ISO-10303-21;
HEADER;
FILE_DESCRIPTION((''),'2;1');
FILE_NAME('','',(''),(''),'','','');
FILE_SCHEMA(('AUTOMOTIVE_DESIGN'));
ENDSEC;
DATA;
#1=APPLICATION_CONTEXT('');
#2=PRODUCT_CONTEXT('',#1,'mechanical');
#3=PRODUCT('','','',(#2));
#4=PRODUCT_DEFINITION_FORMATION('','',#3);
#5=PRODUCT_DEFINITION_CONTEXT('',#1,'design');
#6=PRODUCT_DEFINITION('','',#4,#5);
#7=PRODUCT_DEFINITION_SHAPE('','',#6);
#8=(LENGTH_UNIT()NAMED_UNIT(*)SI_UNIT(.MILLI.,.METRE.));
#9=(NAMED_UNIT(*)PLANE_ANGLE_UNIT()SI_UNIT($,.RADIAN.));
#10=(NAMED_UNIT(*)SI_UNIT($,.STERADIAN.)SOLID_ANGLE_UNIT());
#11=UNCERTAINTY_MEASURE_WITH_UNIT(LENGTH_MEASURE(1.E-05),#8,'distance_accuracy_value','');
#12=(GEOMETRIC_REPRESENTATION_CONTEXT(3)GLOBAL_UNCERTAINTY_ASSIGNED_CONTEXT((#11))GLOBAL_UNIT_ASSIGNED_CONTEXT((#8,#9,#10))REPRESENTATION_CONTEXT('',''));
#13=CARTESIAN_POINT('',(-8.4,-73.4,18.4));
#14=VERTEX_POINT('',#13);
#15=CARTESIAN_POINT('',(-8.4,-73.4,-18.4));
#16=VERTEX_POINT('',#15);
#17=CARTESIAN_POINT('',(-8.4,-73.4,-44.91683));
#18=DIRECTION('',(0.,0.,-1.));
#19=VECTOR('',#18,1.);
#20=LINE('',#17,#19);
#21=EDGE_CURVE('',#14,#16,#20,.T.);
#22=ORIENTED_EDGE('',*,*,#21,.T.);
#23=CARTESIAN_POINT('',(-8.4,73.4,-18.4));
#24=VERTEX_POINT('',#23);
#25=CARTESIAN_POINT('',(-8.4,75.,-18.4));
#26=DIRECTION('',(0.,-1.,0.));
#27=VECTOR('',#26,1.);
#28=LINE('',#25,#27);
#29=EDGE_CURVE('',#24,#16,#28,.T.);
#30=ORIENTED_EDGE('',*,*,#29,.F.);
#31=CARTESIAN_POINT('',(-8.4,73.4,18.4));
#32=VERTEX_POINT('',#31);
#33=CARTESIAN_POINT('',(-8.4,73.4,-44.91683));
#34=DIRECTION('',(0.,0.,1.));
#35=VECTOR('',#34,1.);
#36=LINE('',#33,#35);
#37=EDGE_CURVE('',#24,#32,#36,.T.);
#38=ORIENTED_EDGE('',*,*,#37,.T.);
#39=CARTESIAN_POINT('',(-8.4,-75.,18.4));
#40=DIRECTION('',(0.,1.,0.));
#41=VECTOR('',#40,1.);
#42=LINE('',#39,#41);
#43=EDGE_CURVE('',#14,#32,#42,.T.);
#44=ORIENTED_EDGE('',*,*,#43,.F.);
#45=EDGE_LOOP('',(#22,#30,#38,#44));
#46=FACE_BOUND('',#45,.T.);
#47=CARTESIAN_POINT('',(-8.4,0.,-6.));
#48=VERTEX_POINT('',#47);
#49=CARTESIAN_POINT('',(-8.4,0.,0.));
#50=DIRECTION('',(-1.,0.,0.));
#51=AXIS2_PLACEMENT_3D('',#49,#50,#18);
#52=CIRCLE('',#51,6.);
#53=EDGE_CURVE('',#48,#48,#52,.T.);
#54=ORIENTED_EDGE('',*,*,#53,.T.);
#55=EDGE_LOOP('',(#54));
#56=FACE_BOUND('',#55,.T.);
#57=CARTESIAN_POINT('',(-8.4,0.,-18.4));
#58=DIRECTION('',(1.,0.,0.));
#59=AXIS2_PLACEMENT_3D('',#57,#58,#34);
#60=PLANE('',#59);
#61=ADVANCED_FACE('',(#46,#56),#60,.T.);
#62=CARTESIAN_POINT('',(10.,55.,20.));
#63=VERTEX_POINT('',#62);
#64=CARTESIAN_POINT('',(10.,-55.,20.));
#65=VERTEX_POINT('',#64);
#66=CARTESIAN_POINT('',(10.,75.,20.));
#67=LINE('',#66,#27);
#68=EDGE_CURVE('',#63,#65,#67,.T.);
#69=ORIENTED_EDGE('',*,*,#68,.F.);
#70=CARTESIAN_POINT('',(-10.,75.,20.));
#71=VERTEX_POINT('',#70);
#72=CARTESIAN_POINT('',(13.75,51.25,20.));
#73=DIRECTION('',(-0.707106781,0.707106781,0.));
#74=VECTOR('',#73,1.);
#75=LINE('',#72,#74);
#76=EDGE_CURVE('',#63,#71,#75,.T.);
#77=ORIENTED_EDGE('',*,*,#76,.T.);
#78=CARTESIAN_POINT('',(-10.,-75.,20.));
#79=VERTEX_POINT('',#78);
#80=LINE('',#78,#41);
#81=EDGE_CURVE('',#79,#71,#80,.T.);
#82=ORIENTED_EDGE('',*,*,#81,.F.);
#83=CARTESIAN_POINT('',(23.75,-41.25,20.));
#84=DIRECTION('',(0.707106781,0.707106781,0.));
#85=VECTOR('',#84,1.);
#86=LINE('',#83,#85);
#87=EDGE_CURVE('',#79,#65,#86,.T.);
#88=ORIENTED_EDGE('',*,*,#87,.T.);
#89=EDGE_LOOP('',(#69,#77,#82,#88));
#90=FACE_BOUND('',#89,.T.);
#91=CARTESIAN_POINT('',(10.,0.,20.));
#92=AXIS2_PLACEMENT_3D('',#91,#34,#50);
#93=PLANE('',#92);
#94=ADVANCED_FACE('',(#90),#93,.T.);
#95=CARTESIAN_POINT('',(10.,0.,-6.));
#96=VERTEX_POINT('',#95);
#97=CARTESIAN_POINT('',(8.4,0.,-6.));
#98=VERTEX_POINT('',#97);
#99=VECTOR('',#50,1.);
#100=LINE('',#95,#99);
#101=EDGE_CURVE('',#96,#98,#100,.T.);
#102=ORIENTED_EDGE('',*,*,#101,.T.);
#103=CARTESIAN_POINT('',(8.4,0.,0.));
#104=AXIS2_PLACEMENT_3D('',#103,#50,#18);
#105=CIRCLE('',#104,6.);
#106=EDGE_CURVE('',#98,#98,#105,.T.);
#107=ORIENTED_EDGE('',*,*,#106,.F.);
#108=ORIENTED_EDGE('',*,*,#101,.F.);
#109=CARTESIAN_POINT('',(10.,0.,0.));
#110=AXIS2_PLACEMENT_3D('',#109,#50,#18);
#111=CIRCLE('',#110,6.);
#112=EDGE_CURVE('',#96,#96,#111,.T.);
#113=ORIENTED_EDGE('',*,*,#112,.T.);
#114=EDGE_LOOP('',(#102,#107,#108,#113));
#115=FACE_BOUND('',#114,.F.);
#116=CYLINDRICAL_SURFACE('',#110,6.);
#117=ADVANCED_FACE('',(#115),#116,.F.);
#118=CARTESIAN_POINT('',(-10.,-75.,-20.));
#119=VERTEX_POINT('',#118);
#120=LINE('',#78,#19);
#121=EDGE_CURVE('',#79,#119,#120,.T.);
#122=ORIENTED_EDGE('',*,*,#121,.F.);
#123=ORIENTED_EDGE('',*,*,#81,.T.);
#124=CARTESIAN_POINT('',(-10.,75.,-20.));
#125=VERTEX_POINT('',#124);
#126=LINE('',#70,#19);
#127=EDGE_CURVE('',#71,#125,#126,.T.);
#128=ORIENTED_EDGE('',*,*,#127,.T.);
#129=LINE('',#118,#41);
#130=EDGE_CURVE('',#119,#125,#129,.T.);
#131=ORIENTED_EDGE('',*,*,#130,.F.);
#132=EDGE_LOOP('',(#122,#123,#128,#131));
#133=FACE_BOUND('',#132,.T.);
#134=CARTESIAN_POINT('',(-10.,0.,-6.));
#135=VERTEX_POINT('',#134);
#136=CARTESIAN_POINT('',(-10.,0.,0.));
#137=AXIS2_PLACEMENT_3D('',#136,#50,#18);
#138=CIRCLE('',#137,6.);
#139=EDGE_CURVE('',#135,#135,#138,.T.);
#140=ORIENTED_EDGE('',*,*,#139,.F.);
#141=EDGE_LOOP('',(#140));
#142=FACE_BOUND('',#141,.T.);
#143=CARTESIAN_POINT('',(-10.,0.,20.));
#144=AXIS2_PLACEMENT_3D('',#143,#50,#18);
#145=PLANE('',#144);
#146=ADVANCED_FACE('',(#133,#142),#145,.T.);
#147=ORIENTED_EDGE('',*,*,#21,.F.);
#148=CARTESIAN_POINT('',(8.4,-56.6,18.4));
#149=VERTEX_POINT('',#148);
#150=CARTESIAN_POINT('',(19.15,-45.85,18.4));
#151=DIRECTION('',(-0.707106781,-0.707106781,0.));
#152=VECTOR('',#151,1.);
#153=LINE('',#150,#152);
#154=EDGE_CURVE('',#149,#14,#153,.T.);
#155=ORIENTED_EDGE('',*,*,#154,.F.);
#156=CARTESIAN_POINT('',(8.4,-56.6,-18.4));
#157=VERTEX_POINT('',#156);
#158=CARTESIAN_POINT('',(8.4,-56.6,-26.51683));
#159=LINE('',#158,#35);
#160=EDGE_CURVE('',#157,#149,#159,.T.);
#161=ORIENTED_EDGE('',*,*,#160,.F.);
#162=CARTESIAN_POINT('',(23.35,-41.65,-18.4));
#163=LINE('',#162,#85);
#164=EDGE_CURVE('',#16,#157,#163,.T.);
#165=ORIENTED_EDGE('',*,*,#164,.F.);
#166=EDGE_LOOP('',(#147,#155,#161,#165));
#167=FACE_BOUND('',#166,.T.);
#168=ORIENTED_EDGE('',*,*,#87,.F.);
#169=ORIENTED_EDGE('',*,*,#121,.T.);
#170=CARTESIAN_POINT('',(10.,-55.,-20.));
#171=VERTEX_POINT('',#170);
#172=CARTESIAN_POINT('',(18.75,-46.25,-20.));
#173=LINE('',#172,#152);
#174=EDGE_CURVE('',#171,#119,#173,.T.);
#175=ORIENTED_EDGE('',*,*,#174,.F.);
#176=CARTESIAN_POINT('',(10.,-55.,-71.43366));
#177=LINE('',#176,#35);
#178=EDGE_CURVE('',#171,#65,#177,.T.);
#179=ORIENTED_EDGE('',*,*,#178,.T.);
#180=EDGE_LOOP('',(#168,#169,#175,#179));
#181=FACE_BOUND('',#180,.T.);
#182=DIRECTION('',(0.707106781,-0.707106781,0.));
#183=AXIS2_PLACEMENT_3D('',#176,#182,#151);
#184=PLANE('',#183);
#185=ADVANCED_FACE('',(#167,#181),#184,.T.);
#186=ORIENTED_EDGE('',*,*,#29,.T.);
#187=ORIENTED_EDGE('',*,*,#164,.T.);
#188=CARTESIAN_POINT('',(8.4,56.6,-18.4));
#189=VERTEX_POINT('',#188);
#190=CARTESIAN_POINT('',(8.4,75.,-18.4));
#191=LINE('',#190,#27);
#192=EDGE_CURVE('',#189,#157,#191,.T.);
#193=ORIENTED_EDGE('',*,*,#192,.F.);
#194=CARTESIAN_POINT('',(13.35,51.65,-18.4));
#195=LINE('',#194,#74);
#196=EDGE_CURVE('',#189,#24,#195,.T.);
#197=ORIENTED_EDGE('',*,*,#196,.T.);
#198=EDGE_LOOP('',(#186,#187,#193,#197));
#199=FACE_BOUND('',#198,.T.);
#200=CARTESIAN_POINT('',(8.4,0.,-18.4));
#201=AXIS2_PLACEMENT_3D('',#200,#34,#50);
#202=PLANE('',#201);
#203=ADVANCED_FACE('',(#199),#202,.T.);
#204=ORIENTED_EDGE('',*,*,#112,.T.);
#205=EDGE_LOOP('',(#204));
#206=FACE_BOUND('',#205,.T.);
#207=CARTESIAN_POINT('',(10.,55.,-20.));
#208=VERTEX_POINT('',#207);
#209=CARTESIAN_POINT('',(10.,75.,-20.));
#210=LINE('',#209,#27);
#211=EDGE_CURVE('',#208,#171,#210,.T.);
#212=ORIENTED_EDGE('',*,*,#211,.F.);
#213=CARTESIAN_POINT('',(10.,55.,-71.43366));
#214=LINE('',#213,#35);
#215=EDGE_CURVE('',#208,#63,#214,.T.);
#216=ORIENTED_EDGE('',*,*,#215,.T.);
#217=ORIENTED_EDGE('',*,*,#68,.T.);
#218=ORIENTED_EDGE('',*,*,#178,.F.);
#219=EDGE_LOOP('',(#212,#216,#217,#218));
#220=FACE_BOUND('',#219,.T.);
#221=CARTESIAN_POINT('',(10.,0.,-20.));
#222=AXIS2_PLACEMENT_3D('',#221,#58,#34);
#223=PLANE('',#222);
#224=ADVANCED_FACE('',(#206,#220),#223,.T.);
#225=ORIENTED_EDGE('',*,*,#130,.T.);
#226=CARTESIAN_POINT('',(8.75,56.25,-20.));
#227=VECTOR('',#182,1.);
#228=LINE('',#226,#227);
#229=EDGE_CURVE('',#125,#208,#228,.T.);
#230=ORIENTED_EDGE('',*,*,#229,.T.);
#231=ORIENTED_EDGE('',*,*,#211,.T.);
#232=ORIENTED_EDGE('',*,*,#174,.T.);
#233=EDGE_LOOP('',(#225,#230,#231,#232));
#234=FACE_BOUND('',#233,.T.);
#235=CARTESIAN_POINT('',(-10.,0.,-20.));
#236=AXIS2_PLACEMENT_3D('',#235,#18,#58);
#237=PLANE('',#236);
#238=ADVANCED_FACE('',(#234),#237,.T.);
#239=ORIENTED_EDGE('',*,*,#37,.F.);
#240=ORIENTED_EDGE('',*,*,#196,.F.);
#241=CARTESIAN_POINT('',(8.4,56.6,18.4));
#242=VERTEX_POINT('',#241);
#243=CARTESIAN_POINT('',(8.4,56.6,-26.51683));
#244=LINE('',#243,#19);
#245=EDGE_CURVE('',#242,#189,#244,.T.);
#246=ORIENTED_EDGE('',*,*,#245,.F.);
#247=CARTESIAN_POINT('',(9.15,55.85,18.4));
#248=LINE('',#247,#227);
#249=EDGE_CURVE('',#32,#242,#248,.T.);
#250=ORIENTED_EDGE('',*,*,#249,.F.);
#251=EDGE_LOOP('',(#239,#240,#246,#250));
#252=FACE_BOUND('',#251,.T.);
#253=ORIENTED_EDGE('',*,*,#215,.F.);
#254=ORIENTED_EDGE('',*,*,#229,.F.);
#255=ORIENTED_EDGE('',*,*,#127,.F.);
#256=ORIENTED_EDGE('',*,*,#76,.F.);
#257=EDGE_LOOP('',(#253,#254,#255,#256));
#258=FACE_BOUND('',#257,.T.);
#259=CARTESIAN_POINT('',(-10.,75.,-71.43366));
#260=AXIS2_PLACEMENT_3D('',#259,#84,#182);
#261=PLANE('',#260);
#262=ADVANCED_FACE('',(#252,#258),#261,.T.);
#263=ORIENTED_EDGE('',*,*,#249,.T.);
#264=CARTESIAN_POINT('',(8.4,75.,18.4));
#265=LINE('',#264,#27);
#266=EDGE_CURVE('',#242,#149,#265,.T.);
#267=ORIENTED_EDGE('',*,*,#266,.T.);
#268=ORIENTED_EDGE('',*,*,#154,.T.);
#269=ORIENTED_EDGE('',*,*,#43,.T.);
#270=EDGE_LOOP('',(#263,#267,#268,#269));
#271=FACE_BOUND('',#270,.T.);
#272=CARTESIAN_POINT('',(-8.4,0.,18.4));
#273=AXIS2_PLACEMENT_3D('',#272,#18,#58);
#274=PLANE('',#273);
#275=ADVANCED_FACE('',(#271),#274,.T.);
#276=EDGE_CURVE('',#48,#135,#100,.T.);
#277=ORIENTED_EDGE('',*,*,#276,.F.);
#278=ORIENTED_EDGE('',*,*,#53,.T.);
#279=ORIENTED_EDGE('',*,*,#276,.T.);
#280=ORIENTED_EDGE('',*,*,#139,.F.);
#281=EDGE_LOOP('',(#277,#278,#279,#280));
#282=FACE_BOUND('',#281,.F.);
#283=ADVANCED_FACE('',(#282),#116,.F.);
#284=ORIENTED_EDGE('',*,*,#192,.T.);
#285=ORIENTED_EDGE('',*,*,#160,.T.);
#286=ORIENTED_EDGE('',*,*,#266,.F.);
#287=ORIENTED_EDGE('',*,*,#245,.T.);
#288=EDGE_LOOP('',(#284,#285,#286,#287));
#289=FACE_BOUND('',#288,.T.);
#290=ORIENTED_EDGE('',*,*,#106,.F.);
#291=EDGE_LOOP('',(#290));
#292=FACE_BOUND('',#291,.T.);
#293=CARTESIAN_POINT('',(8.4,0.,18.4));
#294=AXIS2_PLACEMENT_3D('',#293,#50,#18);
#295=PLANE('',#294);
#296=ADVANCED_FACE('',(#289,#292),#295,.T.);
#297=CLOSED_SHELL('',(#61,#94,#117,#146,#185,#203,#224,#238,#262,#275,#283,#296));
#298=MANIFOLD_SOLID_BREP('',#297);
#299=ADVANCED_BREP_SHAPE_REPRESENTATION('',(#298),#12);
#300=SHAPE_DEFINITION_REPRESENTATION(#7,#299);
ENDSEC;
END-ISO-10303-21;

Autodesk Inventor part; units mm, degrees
ref_plane "YZ Plane" through (0, 0, 0) normal (1, 0, 0) x (0, 1, 0)
ref_plane "XZ Plane" through (0, 0, 0) normal (0, 1, 0) x (-1, 0, 0)
ref_plane "XY Plane" through (0, 0, 0) normal (0, 0, 1) x (1, 0, 0)
sketch "スケッチ2" plane through (0, 0, 0) normal (0, 1, 0) x (-1, 0, 0)
  line L0 (10, -20) -> (-10, -20)
  line L1 (-10, -20) -> (-10, 20)
  line L2 (-10, 20) -> (10, 20)
  line L3 (10, 20) -> (10, -20)
  line L4 (10, -20) -> (-10, 20) construction
  line L5 (-10, -20) -> (10, 20) construction
  line L6 (8.4, 18.4) -> (-8.4, 18.4)
  line L7 (-8.4, 18.4) -> (-8.4, -18.4)
  line L8 (-8.4, -18.4) -> (8.4, -18.4)
  line L9 (8.4, -18.4) -> (8.4, 18.4)
  point P0 (0, 0)
  dimension "d7" = 20
  dimension "d8" = 40
  dimension "d9" = 1.6
extrude "押し出し2" add sketch "スケッチ2" along normal mid plane 150
sketch "スケッチ5" plane through (10, -75, -20) normal (1, 0, 0) x (0, 0, -1)
  point P0 (-20, 75)
  point P1 (-20, 75)
hole "穴2" at (10, 0, 0) direction (-1, 0, 0) diameter 12 end through all
chamfer "面取り1" distance 20 angle 45 2 edges at (10, -75, 0) (10, 75, 0)
properties part number "Pipe3"
